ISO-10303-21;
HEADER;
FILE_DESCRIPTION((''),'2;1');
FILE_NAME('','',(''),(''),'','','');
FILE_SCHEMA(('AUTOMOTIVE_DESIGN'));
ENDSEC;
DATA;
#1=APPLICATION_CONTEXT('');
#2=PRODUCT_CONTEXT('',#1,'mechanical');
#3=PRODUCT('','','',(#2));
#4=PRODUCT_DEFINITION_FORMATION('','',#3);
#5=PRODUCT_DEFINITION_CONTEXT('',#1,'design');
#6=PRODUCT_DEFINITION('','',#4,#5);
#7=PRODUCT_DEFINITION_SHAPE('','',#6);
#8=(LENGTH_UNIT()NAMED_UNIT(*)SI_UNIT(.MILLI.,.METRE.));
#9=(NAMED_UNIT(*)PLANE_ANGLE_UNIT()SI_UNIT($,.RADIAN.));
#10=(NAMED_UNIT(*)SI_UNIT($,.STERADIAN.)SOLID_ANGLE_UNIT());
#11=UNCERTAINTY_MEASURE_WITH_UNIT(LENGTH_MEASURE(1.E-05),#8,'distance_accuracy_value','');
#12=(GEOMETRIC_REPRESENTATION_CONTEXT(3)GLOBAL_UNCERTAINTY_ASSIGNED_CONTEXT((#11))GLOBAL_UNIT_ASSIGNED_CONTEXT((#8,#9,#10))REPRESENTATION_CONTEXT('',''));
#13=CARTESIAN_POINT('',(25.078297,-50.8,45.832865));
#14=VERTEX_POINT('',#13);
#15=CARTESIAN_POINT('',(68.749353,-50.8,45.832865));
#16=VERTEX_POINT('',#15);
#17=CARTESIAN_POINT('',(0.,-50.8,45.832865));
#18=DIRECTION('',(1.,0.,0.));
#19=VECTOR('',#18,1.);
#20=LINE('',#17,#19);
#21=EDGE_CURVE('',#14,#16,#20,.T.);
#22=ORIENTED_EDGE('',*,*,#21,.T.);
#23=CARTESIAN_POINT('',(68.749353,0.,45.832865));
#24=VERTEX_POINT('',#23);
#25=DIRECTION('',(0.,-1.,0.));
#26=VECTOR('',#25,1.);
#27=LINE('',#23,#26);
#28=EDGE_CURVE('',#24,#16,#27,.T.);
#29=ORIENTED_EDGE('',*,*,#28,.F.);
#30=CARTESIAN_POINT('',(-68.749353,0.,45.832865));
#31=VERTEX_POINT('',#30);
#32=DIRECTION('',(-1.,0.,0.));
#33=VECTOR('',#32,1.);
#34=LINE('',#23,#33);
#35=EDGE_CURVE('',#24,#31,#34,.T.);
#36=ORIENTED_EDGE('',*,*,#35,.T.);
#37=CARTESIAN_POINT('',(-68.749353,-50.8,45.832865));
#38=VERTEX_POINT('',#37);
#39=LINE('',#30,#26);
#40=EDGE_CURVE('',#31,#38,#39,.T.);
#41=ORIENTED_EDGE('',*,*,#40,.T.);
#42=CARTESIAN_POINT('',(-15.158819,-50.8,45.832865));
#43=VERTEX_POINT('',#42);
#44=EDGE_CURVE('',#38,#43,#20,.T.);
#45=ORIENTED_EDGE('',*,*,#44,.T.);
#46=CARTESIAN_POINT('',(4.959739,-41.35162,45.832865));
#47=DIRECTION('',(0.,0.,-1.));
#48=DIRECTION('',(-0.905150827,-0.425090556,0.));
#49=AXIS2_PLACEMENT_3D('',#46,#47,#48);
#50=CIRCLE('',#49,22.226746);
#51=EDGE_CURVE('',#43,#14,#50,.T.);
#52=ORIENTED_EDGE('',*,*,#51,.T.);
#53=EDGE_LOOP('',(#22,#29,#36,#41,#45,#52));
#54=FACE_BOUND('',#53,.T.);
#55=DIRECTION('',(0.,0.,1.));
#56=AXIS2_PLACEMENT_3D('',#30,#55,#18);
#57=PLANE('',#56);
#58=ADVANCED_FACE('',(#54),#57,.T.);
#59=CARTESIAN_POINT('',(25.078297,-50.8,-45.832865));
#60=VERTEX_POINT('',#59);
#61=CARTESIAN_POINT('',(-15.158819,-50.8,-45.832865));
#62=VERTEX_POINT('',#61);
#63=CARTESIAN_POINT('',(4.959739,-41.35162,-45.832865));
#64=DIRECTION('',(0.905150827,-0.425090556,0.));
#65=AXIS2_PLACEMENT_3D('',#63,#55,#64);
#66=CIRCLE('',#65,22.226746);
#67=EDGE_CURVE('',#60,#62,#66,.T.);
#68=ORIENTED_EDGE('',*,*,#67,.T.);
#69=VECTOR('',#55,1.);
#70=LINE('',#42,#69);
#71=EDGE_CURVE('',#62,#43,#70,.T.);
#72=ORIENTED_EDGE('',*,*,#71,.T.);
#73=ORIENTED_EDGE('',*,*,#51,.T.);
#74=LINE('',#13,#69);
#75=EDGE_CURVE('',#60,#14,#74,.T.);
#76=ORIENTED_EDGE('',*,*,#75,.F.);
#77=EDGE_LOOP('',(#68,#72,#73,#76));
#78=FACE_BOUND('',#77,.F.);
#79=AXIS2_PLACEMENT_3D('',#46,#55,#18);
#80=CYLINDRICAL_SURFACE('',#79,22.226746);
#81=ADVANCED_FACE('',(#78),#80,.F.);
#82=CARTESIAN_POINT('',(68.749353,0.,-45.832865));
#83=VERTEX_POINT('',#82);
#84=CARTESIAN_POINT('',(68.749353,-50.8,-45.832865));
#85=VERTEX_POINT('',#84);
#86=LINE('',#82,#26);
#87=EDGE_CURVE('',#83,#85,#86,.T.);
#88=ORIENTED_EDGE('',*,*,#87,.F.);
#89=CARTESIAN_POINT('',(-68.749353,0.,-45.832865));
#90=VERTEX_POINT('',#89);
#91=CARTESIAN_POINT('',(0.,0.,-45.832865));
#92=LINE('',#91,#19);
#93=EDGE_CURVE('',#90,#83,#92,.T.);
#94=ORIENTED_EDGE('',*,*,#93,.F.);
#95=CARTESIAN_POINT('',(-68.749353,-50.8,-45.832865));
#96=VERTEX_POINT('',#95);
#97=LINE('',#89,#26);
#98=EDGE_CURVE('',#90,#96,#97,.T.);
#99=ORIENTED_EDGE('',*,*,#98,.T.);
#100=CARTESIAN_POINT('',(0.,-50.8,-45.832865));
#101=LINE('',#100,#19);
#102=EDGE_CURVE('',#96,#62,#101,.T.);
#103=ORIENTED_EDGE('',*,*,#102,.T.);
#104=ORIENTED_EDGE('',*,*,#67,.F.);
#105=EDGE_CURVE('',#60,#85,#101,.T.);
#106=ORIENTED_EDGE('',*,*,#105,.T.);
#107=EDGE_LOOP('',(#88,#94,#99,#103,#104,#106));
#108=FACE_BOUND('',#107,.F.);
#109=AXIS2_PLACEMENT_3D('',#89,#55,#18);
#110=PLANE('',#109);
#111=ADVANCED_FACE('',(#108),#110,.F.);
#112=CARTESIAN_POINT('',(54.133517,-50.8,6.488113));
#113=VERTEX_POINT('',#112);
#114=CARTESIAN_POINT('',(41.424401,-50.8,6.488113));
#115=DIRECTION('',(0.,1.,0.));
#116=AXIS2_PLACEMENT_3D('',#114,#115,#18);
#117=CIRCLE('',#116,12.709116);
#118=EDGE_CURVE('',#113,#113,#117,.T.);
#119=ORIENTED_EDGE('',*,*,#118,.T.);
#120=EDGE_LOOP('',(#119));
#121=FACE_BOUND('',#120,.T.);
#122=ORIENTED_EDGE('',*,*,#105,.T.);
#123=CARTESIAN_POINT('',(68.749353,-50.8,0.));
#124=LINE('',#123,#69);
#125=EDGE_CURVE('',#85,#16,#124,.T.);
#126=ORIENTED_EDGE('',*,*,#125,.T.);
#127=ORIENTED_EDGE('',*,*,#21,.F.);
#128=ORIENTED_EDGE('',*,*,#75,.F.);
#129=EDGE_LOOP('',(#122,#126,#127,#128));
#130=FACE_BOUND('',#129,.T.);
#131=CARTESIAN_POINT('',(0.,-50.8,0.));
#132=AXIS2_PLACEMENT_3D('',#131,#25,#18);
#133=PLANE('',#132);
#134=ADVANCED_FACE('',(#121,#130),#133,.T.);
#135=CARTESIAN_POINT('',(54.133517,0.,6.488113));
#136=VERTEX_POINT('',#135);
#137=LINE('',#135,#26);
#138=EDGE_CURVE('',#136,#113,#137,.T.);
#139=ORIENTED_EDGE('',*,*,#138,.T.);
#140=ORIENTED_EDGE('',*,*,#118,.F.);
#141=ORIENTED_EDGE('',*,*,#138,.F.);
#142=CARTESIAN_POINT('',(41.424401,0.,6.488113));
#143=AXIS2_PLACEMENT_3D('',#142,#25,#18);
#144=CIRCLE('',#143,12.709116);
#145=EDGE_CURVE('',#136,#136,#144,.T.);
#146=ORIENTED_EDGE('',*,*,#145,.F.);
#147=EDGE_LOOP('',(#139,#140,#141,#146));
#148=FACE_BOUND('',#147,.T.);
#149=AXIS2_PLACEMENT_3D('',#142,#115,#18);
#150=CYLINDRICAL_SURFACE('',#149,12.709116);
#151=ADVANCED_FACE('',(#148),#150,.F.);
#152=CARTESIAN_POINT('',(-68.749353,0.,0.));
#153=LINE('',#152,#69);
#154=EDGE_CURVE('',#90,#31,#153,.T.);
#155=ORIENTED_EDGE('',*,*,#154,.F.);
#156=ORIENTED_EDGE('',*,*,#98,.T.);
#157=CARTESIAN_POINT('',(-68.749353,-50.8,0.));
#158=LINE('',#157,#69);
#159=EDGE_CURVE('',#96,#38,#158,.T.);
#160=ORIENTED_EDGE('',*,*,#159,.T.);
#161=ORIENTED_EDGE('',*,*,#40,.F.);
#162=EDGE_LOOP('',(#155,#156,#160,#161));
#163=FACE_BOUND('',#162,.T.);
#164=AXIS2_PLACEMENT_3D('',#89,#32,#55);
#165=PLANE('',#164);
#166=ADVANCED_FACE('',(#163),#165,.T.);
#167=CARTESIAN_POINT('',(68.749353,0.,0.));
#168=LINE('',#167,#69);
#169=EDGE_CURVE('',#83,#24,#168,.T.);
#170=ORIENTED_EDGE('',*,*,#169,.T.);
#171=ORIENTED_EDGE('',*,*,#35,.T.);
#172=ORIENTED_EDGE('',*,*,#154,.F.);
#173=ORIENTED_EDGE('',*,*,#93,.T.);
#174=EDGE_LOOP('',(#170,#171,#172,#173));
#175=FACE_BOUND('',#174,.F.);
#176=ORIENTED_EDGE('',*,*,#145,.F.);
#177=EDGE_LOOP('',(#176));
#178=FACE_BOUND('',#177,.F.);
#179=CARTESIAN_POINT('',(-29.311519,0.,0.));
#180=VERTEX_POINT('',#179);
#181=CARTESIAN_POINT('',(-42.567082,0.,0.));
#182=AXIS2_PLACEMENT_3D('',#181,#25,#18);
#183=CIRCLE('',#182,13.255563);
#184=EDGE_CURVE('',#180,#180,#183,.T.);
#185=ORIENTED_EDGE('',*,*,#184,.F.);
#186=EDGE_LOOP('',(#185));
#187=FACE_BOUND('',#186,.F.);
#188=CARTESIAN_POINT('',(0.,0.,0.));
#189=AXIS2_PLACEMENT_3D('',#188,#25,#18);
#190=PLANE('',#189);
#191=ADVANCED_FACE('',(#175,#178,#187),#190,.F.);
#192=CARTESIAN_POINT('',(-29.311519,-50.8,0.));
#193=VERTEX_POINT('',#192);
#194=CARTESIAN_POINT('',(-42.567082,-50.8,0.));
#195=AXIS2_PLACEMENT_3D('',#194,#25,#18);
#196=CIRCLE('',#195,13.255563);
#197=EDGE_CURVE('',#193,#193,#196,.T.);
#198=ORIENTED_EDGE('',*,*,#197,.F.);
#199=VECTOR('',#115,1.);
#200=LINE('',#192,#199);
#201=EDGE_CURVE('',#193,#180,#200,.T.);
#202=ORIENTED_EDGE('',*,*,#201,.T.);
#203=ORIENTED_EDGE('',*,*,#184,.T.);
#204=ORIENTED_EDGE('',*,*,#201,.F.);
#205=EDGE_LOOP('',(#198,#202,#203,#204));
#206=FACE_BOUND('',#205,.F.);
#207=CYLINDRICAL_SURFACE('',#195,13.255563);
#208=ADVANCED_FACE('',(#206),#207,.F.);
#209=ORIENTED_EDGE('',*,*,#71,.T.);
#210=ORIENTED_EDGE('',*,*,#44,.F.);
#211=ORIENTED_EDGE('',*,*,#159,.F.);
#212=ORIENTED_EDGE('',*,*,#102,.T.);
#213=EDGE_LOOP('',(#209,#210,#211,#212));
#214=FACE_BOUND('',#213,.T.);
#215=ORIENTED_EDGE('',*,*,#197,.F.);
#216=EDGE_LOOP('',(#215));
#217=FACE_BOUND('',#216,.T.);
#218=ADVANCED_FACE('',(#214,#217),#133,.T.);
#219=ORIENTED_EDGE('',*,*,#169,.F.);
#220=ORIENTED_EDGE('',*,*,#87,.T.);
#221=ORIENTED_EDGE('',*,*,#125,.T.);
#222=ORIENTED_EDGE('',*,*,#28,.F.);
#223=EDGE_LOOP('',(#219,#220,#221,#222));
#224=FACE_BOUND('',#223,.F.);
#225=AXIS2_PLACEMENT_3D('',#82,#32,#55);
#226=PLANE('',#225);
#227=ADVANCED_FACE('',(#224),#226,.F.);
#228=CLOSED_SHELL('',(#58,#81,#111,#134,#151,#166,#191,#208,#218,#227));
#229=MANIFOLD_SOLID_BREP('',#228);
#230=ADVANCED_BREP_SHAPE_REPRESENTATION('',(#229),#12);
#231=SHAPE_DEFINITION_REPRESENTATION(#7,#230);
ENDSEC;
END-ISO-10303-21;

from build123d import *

# Parameters (mm, degrees)
F0_W       = 137.4987065792
F0_H       = 91.6657298803
F1_DEPTH   = 76.2
F3_R       = 34.4698963813
F4_DEPTH   = 76.2
F5_R       = 33.2776122009
F1_FACE1_W = 137.4987065792
F1_FACE1_H = 91.6657298803
F6_DEPTH   = 25.4
F7_R       = 29.7028077698
F8_DEPTH   = 25.4
F9_R       = 24.8229893925
F10_DEPTH  = 25.4
F11_R      = 22.2267461951
F12_DEPTH  = 127
F13_R      = 13.2555629358
F14_DEPTH  = 127
F15_R      = 12.3283716693
F16_DEPTH  = 127
F17_R      = 13.7331139198
F19_DEPTH  = 127
F21_R      = 15.0922963459
F22_DEPTH  = 127
F23_R      = 12.709116002
F24_DEPTH  = 152.4


# Not quite as in the source:
# - a feature of the source that left no trace in its solid (it failed there, or was rolled back) is left out


with BuildPart() as f1:
    # F0 (on Front) → F1 (new body)
    with BuildSketch(Plane.XZ):
        Rectangle(F0_W, F0_H)
    extrude(amount=F1_DEPTH)

    # F3 (on Front) → F4 (cut)
    with BuildSketch(Plane.XZ):
        with Locations((0, 31.9152921438)):
            Circle(F3_R)
    extrude(amount=-F4_DEPTH, mode=Mode.SUBTRACT)

    # F5 (on Front) + F1_face1 (on face) → F6 (cut)
    with BuildSketch(Plane.XZ):
        with Locations((0, 32.8243151307)):
            Circle(F5_R)
    with BuildSketch(Plane.XZ.offset(76.2)):
        Rectangle(F1_FACE1_W, F1_FACE1_H)
    extrude(amount=-F6_DEPTH, mode=Mode.SUBTRACT)

    # F7 (on Front) → F8 (cut)
    with BuildSketch(Plane.XZ):
        with Locations((0, 34.5415323973)):
            Circle(F7_R)
    extrude(amount=-F8_DEPTH, mode=Mode.SUBTRACT)

    # F9 (on Front) → F10 (cut)
    with BuildSketch(Plane.XZ):
        with Locations((0, 21.1320593953)):
            Circle(F9_R)
    extrude(amount=-F10_DEPTH, mode=Mode.SUBTRACT)

    # F11 (on face) → F12 (cut)
    with BuildSketch(Plane.XY.offset(45.8328649402)):
        with Locations((4.9597388133, -41.3516201079)):
            Circle(F11_R)
    extrude(amount=-F12_DEPTH, mode=Mode.SUBTRACT)

    # F13 (on face) → F14 (cut)
    with BuildSketch(Plane.XZ.offset(50.8)):
        with Locations((-42.5670817494, 0)):
            Circle(F13_R)
    extrude(amount=-F14_DEPTH, mode=Mode.SUBTRACT)

    # F15 (on Front) → F16 (cut)
    with BuildSketch(Plane.XZ):
        with Locations((51.0331951082, 0)):
            Circle(F15_R)
    extrude(amount=-F16_DEPTH, mode=Mode.SUBTRACT)

    # F17 (on Front) → F19 (cut)
    with BuildSketch(Plane.XZ):
        with Locations((48.1030344963, 0)):
            Circle(F17_R)
    extrude(amount=-F19_DEPTH, mode=Mode.SUBTRACT)

    # F21 (on Front) → F22 (cut)
    with BuildSketch(Plane.XZ):
        with Locations((40.081076324, 0)):
            Circle(F21_R)
    extrude(amount=-F22_DEPTH, mode=Mode.SUBTRACT)

    # F23 (on Front) → F24 (cut)
    with BuildSketch(Plane.XZ):
        with Locations((41.4244011045, 6.4881131984)):
            Circle(F23_R)
    extrude(amount=F24_DEPTH, mode=Mode.SUBTRACT)


solid = f1.part
